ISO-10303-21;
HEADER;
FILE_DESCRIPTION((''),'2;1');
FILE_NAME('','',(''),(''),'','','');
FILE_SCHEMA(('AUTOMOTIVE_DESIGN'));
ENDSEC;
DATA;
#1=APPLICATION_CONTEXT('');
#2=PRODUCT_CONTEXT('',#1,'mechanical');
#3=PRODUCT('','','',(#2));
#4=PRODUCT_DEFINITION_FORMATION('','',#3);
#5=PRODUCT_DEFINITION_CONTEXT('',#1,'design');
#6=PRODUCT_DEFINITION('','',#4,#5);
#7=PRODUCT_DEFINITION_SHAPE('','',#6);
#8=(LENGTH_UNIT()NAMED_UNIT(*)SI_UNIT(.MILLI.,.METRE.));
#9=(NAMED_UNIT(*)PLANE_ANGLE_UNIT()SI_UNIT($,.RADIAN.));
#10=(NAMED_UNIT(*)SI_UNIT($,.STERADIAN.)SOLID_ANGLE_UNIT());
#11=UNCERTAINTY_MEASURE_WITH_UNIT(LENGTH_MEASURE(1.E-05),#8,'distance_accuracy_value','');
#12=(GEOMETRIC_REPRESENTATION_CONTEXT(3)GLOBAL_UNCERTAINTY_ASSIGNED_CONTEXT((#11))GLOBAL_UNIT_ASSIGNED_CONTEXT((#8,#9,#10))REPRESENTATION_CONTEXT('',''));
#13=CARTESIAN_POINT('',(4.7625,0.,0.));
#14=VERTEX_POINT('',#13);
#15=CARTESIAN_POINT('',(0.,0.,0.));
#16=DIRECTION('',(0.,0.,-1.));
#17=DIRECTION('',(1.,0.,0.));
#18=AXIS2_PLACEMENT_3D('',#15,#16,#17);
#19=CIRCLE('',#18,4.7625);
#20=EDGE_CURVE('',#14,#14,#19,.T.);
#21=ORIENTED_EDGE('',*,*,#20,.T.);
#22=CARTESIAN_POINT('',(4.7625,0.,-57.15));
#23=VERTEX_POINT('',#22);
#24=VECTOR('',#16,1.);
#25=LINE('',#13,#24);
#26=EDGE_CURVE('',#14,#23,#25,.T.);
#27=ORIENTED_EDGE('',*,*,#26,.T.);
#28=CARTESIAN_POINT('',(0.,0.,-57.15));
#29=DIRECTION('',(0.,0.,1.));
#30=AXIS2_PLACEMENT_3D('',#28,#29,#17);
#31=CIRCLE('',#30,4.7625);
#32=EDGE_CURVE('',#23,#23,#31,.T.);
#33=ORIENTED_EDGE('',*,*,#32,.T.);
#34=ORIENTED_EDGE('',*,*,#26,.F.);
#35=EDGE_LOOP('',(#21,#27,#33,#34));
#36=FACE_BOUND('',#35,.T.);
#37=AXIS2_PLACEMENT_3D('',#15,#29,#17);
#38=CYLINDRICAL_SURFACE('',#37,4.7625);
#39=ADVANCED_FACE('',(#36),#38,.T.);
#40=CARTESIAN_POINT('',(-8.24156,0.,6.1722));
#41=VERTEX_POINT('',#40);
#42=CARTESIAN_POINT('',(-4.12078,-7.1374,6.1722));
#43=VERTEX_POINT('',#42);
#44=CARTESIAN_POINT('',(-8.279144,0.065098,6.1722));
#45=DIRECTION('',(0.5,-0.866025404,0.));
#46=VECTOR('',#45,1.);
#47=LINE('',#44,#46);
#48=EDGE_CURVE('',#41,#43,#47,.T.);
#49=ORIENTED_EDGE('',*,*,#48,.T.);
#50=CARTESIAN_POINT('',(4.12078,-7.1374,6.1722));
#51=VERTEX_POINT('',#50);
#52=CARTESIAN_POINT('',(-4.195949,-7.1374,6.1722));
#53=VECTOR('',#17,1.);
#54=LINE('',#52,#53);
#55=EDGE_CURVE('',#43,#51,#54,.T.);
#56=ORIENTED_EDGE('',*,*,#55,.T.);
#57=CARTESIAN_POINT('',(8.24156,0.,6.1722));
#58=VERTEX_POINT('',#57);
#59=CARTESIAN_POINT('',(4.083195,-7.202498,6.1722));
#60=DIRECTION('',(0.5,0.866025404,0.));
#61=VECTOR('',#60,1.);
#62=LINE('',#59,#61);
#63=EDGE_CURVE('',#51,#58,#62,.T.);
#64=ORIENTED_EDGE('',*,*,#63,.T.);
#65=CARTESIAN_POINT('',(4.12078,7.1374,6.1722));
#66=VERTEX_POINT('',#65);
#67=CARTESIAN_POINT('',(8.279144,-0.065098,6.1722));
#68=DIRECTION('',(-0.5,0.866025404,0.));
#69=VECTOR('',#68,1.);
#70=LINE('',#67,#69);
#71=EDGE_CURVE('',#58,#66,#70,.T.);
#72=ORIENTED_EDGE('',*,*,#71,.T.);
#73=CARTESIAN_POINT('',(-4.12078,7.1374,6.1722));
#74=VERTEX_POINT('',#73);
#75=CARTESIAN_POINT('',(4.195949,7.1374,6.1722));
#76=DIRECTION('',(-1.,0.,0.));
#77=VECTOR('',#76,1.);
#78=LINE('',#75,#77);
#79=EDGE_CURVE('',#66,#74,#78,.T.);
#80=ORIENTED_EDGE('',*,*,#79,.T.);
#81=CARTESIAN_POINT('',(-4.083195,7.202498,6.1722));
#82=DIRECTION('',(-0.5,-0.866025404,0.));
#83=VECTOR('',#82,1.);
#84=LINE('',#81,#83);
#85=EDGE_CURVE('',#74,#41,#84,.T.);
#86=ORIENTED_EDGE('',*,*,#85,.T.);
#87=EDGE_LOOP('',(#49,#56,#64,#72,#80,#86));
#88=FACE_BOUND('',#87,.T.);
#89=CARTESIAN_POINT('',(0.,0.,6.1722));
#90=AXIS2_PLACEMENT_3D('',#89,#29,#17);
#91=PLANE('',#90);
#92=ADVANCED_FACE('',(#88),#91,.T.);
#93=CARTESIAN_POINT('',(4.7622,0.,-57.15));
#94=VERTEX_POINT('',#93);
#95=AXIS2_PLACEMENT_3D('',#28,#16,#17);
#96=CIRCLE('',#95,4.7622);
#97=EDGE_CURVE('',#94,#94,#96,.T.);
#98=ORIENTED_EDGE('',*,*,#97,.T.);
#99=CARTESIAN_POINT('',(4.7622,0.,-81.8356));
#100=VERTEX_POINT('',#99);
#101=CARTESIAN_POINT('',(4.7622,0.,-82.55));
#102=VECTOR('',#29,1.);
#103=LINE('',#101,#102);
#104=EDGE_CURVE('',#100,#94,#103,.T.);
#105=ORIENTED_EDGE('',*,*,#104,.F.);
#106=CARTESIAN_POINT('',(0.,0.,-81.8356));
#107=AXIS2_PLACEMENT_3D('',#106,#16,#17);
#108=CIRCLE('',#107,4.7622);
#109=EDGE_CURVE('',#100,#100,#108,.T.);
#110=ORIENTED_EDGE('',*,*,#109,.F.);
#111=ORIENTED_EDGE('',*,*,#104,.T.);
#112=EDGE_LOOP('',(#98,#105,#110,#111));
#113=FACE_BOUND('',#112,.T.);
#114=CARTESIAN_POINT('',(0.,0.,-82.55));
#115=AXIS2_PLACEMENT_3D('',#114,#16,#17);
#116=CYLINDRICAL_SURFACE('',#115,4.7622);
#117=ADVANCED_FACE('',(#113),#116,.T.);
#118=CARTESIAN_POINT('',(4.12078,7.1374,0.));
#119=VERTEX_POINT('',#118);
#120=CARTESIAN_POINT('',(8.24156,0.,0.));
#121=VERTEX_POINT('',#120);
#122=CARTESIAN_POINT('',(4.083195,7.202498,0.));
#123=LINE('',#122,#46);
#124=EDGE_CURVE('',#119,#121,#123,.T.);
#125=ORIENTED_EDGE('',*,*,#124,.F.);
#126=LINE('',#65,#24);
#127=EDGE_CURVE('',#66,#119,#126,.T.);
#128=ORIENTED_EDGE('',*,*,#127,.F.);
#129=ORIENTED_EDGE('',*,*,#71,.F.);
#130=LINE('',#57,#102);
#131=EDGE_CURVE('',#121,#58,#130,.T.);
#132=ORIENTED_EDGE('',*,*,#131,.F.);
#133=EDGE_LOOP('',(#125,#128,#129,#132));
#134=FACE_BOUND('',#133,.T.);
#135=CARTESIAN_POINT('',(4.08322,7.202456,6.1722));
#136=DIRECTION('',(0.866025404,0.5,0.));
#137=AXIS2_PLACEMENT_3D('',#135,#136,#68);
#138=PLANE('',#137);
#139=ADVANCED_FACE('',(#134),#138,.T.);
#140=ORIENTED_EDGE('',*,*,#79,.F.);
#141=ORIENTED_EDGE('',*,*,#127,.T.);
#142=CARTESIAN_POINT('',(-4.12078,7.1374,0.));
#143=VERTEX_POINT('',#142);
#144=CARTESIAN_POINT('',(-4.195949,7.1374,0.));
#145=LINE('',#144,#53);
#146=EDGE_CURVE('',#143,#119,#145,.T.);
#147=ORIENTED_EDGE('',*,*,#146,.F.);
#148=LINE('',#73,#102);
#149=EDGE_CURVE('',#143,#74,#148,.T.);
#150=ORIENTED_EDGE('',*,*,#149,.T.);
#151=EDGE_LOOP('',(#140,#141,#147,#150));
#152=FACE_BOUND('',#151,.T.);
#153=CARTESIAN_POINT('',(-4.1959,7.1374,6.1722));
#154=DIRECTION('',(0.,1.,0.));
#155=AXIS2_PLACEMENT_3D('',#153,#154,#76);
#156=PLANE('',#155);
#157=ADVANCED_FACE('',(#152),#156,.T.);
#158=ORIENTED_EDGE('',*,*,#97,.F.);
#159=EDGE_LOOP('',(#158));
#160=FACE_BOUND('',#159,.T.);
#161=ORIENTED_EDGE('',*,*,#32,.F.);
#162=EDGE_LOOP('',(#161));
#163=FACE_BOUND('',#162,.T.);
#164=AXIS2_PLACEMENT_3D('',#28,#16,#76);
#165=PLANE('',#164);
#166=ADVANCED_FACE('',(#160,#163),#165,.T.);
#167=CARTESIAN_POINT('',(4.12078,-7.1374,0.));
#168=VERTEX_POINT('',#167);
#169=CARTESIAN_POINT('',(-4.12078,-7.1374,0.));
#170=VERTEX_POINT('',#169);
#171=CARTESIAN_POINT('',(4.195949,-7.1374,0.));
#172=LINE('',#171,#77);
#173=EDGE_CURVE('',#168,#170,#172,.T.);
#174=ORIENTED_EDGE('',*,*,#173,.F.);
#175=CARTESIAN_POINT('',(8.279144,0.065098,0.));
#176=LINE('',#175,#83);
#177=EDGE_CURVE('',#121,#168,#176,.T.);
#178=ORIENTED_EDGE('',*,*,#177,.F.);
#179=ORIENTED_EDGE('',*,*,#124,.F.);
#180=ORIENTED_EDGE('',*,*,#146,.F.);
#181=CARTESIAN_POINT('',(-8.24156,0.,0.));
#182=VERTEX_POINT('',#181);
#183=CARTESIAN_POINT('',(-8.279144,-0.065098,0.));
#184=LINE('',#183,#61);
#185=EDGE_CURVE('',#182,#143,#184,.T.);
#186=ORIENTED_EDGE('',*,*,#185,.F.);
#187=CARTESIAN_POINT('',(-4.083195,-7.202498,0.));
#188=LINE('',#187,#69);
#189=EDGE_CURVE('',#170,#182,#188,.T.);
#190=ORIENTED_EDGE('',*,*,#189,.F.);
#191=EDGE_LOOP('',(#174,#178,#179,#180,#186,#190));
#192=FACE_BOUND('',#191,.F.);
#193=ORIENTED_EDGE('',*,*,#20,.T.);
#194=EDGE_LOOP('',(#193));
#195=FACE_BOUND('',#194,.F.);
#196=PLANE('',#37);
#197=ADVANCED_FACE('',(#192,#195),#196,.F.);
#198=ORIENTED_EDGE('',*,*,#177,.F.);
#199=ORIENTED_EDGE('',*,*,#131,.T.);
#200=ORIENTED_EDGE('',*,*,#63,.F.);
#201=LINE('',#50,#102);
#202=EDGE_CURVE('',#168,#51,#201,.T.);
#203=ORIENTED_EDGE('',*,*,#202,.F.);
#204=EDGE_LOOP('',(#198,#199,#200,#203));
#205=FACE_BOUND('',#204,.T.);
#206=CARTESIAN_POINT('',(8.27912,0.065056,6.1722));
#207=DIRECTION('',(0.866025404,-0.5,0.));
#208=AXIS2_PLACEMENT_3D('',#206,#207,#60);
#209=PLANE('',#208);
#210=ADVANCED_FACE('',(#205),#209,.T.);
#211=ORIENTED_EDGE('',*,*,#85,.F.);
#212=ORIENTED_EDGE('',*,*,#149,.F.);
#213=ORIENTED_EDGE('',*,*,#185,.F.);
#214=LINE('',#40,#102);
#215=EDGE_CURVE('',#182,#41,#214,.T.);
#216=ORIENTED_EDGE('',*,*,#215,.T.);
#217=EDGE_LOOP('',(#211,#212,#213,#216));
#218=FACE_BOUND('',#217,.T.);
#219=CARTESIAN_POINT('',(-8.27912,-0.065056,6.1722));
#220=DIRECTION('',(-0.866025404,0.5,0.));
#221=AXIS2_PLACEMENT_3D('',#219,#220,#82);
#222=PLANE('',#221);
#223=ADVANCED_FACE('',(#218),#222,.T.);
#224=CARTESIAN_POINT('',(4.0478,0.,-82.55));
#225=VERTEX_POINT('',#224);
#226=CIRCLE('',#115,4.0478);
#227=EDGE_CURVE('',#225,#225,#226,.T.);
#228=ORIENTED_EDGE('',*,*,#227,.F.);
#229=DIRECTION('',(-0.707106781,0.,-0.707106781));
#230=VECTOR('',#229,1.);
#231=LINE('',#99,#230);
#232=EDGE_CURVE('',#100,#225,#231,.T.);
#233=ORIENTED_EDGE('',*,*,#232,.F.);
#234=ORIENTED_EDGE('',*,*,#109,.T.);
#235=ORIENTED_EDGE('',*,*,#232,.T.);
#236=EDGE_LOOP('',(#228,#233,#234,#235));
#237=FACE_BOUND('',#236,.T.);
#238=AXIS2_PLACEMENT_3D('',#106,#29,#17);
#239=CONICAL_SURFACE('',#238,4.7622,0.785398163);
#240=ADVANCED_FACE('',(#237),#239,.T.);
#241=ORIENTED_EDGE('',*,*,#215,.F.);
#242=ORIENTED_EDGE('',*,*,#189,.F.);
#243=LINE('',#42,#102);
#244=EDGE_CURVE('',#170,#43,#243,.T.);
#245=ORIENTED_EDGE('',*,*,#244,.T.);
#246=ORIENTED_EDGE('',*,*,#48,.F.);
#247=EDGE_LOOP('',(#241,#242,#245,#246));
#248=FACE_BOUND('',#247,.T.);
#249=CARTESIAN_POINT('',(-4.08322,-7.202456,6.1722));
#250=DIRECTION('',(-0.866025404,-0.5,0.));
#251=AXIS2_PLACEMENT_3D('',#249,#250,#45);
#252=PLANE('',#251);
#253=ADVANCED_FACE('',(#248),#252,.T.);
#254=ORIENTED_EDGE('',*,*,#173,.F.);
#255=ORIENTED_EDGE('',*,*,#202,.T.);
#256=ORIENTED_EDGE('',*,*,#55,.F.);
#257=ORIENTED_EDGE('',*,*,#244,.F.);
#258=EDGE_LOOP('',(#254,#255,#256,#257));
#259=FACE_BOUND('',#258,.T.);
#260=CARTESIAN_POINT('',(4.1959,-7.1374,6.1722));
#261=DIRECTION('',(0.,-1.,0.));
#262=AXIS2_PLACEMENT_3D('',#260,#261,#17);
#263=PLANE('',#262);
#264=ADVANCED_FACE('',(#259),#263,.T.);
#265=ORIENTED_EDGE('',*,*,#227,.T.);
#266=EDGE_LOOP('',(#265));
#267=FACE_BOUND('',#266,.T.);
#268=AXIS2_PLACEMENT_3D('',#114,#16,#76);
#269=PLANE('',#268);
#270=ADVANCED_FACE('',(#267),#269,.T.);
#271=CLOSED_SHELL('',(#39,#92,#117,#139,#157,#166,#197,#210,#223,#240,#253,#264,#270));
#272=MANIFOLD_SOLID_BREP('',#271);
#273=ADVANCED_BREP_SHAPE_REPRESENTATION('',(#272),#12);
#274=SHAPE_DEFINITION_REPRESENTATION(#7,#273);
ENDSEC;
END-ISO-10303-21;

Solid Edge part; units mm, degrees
sketch "Sketch1" plane through (0, 0, 0) normal (0, 0, 1) x (1, 0, 0)
  circle A0 centre (0, 0) radius 8.2794
  dimension "D1" = 16.5588
extrude "Protrusion1" add sketch "Sketch1" along normal blind 6.1722
sketch "Sketch2" plane through (0, 0, 0) normal (0, 0, -1) x (1, 0, 0)
  circle A0 centre (0, 0) radius 4.7625
extrude "Protrusion2" add sketch "Sketch2" along normal blind 82.55
sketch "Sketch3" plane through (0, 0, -82.55) normal (0, 0, -1) x (1, 0, 0)
  circle A0 centre (0, 0) radius 4.7622
extrude "Cutout1" cut sketch "Sketch3" against normal blind 25.4 flip side to cut
chamfer "Chamfer_1" distance 0.7144 angle 45 1 edges at (-4.7622, 0, -82.55)
sketch "Sketch4" plane through (0, 0, 6.1722) normal (0, 0, 1) x (1, 0, 0)
  line L0 (-4.1959, 7.1374) -> (4.1959, 7.1374)
  dimension "D1" = 14.2748
extrude "Cutout2" cut sketch "Sketch4" against normal up to next material side at (0, 7.1874, 6.1722)
pattern_circular "Pattern1" count 6 over 360 about axis through (0, 0, 6.1722) along (0, 0, 1) of "Cutout2"
properties part number "24100618"
